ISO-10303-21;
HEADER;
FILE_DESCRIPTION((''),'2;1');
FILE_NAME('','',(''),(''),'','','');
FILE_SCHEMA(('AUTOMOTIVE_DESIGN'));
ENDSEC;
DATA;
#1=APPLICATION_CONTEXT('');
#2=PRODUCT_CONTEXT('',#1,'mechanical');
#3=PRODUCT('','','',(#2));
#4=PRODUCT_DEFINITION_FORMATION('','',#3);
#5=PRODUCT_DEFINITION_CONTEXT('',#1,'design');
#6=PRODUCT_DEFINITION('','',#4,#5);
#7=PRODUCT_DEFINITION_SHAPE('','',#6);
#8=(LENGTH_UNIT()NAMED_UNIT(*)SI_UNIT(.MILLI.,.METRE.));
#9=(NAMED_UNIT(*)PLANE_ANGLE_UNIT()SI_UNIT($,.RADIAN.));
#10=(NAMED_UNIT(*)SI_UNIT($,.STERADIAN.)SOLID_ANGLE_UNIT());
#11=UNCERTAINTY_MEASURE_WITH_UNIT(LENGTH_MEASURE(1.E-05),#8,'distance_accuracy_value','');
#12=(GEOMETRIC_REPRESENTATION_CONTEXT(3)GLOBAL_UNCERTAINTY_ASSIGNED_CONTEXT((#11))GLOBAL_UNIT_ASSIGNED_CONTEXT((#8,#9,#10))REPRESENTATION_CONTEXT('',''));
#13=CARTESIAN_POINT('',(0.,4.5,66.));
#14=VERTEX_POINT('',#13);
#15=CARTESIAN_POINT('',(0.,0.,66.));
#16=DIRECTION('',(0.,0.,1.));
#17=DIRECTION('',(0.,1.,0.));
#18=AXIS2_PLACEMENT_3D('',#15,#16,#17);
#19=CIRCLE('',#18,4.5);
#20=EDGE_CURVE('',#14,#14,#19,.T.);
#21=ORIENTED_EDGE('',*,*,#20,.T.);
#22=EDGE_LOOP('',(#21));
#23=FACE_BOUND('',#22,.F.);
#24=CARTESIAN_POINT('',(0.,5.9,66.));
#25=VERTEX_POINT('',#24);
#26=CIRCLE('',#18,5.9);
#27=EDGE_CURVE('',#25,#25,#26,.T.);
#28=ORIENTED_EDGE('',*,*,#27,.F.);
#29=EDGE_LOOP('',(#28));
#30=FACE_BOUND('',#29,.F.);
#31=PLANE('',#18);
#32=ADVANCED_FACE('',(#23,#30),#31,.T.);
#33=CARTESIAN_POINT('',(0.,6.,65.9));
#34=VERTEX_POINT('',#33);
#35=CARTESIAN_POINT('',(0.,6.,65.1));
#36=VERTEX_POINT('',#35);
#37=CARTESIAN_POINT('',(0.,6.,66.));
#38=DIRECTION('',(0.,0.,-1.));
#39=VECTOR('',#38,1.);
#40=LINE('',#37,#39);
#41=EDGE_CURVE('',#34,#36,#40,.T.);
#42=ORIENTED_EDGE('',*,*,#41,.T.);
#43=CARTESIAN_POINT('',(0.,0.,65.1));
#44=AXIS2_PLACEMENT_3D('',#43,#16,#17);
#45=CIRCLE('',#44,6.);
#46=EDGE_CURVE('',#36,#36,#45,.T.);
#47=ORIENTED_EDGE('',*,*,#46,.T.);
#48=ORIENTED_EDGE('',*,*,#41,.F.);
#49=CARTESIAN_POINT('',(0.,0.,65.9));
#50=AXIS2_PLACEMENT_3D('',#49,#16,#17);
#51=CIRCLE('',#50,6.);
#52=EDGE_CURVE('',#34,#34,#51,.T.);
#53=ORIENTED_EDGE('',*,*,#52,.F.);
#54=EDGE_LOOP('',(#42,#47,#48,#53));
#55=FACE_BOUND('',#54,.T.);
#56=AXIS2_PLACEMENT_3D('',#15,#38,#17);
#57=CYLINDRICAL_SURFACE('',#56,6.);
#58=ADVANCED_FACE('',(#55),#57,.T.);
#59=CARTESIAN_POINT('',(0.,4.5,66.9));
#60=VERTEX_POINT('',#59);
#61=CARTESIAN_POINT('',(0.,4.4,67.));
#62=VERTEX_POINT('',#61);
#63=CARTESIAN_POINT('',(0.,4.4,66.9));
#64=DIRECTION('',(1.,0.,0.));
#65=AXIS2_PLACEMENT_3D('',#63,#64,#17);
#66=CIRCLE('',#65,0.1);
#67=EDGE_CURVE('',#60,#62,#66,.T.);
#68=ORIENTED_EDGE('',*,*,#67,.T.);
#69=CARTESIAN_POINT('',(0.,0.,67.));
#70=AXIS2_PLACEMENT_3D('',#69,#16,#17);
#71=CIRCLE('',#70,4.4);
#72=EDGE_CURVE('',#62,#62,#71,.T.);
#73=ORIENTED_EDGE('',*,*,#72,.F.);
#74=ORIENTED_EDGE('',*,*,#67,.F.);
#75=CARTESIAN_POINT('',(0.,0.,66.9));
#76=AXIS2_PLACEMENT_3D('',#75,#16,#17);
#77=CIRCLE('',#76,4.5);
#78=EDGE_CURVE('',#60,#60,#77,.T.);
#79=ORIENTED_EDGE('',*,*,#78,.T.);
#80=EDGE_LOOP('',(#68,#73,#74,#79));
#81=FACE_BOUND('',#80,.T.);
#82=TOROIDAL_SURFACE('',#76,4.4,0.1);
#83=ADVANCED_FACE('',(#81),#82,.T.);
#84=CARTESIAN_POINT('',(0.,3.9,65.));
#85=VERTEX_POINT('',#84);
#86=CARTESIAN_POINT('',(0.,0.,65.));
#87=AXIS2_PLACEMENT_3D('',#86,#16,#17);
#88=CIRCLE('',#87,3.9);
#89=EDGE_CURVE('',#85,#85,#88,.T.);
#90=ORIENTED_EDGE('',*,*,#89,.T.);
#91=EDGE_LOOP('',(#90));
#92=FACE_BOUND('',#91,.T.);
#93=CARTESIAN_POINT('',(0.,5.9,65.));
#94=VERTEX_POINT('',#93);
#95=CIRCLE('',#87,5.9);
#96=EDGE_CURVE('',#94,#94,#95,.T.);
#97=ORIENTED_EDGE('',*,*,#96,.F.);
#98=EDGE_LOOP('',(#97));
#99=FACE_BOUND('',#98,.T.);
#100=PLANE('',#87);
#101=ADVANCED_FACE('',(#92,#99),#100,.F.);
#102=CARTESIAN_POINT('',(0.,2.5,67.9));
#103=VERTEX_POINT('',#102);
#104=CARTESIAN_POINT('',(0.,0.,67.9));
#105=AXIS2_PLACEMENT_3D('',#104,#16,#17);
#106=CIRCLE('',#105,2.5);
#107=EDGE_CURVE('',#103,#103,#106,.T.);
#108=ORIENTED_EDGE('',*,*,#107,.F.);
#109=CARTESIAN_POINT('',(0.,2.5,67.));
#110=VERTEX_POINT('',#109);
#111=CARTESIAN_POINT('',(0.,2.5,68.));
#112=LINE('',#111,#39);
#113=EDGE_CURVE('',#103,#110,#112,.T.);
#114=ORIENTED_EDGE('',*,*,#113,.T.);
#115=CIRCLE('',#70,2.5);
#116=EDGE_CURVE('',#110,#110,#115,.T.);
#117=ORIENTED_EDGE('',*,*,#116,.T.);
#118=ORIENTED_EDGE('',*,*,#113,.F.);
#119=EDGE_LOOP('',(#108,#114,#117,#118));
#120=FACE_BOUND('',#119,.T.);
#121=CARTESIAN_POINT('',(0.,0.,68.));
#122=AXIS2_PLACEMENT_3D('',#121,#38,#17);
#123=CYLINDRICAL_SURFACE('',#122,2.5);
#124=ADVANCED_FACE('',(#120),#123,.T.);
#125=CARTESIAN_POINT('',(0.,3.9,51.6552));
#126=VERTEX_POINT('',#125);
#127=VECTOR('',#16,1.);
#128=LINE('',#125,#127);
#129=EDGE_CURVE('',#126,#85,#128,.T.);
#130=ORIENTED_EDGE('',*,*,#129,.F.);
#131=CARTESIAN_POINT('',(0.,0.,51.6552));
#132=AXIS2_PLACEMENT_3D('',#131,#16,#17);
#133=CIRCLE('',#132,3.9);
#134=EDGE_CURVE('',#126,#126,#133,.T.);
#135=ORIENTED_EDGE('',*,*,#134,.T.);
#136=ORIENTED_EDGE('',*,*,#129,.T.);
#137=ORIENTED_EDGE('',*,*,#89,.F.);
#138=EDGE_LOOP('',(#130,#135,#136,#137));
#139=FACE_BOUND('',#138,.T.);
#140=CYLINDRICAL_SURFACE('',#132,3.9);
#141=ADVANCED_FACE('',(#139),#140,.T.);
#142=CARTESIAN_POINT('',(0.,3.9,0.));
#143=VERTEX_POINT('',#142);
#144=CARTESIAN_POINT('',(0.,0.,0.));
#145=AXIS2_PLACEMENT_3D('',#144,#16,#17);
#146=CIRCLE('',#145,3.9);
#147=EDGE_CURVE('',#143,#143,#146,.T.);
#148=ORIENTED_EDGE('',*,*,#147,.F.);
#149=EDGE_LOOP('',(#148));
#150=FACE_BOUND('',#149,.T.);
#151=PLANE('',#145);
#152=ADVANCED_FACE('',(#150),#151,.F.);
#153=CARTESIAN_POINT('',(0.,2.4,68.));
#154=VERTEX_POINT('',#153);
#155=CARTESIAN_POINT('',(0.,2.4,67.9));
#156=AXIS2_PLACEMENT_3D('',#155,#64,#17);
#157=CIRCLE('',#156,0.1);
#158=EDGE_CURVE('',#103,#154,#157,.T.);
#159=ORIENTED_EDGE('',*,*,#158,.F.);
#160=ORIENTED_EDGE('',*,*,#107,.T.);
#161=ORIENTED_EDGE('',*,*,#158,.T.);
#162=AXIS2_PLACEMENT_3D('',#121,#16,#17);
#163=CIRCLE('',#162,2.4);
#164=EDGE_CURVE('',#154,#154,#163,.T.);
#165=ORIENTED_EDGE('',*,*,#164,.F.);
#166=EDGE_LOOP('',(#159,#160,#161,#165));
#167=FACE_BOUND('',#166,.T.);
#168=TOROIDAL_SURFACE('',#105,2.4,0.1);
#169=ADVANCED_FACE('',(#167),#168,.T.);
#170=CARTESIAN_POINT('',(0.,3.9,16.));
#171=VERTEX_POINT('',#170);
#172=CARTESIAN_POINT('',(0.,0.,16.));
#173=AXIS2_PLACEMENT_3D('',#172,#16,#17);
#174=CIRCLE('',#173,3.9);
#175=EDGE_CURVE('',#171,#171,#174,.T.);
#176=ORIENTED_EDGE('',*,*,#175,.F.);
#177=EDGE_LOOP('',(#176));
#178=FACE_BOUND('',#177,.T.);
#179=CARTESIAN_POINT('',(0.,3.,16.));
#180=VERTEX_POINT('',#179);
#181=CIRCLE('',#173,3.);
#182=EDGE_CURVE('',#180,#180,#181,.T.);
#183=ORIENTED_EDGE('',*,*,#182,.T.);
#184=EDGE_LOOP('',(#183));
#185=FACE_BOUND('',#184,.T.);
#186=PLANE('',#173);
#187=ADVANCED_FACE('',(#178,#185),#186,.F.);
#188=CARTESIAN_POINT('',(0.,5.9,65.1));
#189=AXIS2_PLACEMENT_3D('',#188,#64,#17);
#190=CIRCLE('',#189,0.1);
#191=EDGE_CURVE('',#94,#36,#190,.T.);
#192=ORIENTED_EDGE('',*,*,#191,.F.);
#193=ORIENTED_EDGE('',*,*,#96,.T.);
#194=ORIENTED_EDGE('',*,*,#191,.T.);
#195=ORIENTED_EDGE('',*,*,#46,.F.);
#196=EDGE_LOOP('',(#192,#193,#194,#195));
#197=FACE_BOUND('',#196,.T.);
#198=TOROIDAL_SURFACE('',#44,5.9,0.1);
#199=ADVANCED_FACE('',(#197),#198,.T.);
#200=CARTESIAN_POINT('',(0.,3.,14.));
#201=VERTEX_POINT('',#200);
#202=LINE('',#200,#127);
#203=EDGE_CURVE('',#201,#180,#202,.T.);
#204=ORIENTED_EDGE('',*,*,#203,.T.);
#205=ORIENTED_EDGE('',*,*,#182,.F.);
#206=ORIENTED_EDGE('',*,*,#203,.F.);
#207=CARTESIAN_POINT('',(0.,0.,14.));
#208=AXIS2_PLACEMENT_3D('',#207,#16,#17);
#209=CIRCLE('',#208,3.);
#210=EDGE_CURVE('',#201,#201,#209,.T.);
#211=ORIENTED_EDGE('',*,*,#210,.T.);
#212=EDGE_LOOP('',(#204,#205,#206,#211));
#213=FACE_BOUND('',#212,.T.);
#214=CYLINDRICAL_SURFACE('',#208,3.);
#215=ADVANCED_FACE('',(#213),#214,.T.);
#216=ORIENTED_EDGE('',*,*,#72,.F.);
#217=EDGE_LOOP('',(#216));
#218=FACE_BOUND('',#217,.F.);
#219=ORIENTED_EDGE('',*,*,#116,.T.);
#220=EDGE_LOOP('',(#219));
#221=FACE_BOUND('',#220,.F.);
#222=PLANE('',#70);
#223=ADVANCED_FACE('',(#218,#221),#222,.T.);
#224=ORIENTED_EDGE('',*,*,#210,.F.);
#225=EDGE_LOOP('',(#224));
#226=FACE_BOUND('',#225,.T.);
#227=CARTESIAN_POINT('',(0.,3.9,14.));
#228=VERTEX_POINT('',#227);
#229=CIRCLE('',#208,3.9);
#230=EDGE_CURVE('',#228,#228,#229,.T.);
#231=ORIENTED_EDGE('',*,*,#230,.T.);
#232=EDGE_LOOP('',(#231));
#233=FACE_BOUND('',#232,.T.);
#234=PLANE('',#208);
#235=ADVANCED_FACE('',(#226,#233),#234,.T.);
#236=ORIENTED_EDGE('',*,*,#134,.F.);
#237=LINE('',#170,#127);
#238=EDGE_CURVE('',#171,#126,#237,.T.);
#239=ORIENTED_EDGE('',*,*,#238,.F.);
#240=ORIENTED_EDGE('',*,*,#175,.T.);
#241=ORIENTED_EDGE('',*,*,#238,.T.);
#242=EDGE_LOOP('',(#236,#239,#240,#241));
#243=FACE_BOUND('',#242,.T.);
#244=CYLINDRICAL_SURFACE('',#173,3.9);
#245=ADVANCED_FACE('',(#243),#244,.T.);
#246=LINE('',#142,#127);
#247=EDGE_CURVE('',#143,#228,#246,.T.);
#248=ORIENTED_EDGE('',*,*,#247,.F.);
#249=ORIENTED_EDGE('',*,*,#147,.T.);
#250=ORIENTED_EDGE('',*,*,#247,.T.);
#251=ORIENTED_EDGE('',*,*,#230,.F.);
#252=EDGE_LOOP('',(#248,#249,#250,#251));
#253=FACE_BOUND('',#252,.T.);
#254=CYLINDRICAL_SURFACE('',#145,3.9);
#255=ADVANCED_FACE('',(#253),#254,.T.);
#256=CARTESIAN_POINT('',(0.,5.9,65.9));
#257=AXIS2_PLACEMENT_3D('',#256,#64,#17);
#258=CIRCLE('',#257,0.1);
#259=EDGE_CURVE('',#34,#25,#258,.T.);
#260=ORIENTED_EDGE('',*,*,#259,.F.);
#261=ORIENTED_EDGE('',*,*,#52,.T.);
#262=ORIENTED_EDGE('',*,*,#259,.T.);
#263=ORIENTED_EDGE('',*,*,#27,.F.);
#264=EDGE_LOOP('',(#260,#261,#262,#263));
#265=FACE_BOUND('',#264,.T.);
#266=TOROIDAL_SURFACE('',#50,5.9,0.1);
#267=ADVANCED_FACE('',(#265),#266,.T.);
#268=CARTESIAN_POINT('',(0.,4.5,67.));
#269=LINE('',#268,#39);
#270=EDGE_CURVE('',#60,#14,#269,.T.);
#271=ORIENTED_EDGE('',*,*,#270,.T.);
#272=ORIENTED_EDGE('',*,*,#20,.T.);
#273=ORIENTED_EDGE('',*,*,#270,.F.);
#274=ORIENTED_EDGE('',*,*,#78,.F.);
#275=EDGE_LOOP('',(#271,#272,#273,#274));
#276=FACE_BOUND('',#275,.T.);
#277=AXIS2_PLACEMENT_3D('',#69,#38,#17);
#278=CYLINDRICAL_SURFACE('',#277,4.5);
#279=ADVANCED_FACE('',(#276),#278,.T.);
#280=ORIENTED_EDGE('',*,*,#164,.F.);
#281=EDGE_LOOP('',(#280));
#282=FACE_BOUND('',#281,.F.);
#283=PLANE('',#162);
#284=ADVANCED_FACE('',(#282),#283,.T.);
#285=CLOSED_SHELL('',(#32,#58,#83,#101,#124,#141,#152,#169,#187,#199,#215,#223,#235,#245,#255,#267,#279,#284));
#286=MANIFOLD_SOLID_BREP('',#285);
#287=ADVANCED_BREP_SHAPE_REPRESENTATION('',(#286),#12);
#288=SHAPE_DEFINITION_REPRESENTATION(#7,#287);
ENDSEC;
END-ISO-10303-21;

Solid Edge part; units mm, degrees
sketch "Sketch1" plane through (0, 0, 0) normal (1, 0, 0) x (0, 1, 0)
  line L0 (0, 0) -> (3.9, 0)
  line L1 (3.9, 0) -> (3.9, 14)
  line L2 (3.9, 14) -> (3, 14)
  line L3 (3, 14) -> (3, 16)
  line L4 (3, 16) -> (3.9, 16)
  line L5 (3.9, 16) -> (3.9, 51.6552)
  line L6 (3.9, 51.6552) -> (3.9, 65)
  line L7 (3.9, 65) -> (6, 65)
  line L8 (6, 66) -> (6, 65)
  line L9 (4.5, 66) -> (6, 66)
  line L10 (4.5, 67) -> (4.5, 66)
  line L11 (2.5, 67) -> (4.5, 67)
  line L12 (2.5, 68) -> (2.5, 67)
  line L13 (0, 68) -> (2.5, 68)
revolve "RevolvedProtrusion1" add sketch "Sketch1" angle 360 about axis through (0, 0, 0) along (0, 0, 1)
fillet "Lekerekítés_1" radius 0.1 2 edges at (-6, 0, 66) (-6, 0, 65)
fillet "Lekerekítés_2" radius 0.1 2 edges at (-4.5, 0, 67) (-2.5, 0, 68)
properties material "Rozsdamentes acél"
